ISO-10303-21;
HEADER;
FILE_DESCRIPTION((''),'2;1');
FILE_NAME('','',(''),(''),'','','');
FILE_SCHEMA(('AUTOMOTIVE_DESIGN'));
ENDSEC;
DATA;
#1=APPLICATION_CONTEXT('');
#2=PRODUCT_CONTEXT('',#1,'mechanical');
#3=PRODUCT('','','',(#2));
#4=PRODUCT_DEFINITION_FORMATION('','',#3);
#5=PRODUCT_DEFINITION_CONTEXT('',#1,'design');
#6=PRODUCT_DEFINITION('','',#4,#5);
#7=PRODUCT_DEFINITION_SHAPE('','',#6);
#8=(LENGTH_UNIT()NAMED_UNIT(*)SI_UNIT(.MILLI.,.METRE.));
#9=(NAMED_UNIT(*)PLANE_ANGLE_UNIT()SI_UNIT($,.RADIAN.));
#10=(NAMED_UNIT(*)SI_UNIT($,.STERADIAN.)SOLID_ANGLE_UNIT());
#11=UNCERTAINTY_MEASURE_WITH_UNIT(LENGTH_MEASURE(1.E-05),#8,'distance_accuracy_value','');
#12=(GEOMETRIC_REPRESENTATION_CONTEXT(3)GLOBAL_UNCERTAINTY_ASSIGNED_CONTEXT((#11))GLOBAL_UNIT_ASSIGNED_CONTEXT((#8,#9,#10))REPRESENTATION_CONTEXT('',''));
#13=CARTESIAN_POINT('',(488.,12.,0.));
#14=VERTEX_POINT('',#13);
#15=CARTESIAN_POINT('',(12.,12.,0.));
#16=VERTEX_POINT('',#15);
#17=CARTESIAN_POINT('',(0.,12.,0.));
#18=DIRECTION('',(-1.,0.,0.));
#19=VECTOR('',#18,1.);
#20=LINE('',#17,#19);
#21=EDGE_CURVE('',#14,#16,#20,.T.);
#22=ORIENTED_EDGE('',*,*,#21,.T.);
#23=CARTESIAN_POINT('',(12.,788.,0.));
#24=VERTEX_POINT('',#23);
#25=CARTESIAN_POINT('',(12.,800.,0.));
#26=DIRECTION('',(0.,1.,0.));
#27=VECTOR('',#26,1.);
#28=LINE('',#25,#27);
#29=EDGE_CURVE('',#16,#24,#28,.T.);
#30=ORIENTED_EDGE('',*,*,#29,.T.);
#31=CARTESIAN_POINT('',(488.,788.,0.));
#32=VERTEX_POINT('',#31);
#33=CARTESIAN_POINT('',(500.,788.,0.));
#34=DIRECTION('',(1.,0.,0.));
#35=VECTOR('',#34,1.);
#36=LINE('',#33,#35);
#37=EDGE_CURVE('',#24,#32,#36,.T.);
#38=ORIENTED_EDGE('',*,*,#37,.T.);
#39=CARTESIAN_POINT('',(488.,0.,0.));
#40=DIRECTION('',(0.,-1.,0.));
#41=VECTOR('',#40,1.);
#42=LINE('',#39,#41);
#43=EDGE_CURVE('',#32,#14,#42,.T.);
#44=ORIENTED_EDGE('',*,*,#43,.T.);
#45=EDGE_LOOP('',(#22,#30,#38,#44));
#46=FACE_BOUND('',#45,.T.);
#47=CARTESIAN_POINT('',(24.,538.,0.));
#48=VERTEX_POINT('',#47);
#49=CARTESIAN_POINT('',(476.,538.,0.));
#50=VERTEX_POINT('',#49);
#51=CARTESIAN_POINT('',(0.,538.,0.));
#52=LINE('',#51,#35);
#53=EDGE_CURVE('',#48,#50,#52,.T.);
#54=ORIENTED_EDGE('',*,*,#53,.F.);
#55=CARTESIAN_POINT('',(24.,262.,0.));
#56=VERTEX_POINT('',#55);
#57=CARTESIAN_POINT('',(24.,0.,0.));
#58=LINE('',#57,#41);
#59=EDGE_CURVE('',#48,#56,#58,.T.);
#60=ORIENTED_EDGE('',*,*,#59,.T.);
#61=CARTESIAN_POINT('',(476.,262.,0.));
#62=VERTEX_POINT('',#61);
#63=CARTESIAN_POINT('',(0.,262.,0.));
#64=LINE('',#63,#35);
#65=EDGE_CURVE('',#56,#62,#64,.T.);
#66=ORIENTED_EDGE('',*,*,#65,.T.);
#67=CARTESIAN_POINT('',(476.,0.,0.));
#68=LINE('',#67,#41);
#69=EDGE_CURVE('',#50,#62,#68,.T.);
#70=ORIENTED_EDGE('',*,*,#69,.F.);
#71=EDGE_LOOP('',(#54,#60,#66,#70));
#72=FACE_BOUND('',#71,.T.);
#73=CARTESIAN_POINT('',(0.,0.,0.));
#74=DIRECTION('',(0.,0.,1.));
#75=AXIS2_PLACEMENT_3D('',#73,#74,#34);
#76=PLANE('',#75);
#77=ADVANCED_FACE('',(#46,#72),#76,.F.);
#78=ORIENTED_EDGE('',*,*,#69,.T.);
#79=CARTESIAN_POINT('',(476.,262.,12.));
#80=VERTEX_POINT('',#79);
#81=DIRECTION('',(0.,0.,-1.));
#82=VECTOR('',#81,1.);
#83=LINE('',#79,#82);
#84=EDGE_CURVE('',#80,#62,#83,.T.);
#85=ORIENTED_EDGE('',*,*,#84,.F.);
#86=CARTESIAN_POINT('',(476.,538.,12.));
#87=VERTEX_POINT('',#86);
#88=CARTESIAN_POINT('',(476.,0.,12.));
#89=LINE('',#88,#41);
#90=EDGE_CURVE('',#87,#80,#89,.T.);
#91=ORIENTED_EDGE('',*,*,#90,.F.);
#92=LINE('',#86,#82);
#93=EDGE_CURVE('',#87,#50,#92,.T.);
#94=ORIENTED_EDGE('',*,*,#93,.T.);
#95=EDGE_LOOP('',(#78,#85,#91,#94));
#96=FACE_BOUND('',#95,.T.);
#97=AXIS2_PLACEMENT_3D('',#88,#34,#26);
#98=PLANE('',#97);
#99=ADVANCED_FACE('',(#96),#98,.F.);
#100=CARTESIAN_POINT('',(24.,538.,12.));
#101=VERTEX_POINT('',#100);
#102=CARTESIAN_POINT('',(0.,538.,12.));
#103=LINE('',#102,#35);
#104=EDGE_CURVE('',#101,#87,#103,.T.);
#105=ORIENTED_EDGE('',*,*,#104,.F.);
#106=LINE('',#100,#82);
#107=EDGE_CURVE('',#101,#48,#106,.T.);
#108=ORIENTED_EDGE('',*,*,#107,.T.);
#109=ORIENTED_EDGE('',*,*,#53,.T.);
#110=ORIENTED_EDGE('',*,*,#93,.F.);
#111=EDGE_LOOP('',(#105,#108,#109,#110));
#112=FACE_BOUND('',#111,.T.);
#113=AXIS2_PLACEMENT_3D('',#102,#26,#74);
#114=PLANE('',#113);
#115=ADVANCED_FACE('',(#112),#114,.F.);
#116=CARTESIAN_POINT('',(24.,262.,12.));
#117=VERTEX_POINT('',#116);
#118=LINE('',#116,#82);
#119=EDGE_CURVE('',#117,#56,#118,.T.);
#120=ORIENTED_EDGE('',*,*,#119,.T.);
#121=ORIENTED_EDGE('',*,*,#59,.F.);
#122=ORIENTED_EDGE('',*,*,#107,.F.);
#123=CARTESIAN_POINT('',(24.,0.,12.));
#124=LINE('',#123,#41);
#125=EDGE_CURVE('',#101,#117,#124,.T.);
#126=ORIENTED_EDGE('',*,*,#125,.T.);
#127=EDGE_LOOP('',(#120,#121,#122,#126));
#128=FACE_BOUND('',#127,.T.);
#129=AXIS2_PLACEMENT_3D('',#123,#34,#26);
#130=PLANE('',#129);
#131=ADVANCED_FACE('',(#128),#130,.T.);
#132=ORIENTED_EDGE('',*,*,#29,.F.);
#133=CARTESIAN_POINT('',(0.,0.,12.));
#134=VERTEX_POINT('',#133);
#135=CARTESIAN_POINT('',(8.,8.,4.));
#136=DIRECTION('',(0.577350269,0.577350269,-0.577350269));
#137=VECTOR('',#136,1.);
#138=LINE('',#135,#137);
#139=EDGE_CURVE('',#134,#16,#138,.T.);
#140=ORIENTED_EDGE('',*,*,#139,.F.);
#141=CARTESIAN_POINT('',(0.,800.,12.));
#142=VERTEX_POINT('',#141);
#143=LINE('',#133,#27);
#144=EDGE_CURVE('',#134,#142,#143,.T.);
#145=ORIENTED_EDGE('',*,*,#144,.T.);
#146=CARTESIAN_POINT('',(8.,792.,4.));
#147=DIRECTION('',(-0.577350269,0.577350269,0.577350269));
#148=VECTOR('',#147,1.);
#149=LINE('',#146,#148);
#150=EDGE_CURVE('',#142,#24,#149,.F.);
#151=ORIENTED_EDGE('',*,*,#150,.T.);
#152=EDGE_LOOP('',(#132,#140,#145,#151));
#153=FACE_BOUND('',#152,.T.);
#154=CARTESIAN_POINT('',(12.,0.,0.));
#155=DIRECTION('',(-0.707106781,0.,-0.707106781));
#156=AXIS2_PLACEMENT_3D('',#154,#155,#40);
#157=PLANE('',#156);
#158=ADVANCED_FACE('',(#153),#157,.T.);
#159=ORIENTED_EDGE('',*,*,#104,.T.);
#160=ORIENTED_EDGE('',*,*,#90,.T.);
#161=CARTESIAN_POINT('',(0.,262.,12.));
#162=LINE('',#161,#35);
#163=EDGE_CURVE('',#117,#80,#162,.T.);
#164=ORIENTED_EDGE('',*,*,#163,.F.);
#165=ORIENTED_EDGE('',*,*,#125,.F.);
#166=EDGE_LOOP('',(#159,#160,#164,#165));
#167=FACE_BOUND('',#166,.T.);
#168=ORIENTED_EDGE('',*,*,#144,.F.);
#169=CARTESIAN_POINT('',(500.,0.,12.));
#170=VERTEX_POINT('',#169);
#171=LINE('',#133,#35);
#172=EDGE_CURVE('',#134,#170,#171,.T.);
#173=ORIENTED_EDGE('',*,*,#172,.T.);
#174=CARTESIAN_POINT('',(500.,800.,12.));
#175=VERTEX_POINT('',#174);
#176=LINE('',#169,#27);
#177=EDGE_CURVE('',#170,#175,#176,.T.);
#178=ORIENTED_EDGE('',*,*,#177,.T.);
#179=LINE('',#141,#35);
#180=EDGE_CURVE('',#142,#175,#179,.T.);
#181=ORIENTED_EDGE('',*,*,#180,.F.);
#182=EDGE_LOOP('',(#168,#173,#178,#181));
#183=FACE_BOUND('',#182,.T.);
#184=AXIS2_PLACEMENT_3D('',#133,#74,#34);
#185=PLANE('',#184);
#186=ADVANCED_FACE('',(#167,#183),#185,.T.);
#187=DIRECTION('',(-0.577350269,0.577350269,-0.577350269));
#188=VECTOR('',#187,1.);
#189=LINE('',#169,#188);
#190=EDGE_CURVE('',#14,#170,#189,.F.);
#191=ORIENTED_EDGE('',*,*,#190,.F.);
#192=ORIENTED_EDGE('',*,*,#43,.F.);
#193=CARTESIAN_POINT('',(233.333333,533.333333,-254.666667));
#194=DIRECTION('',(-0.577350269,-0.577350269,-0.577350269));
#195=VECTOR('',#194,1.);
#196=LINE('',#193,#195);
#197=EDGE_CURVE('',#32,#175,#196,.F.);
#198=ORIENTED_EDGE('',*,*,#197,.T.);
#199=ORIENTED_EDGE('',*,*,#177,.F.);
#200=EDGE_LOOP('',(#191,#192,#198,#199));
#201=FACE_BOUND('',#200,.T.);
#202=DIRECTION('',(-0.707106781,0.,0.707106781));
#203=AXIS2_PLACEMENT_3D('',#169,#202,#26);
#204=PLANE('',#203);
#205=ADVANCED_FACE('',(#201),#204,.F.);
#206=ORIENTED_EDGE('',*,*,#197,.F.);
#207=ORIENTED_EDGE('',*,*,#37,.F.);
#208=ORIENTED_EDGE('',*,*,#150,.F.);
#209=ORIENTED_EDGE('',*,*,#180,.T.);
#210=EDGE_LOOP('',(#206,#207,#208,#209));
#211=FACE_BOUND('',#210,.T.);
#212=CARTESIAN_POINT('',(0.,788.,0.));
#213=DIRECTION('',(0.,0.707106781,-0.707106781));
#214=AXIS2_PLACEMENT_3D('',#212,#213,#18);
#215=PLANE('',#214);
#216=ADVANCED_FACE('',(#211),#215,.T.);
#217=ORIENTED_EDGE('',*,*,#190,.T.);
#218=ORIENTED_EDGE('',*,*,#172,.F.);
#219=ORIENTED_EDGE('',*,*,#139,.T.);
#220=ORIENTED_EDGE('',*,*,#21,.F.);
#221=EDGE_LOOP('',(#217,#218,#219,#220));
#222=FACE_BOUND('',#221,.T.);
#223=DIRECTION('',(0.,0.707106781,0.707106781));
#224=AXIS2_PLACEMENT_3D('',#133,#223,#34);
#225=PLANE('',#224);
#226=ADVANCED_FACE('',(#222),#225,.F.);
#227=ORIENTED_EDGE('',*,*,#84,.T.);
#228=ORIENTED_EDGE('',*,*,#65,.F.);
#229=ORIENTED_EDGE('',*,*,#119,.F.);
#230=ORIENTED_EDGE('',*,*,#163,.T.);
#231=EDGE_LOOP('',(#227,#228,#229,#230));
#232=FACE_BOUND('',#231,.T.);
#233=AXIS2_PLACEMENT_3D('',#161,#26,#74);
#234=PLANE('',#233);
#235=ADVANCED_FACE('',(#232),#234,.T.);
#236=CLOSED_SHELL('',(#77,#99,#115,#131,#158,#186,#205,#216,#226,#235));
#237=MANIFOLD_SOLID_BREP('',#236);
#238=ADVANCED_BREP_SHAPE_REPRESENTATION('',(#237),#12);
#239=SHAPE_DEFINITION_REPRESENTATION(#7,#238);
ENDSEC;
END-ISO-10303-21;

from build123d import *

# Parameters (mm, degrees)
SKETCH1_W           = 500
SKETCH1_H           = 800
BOSS_EXTRUDE1_DEPTH = 12
SKETCH1_5_W         = 452
SKETCH1_5_H         = 276
CUT_EXTRUDE1_DEPTH  = 944.474429966
CHAMFER1_SIZE       = 12


with BuildPart() as part:
    # Sketch1 → Boss-Extrude1 (new body)
    with BuildSketch(Plane.XY):
        with Locations((250, 400)):
            Rectangle(SKETCH1_W, SKETCH1_H)
    extrude(amount=BOSS_EXTRUDE1_DEPTH)

    # Sketch1<5> → Cut-Extrude1 (cut, through all)
    with BuildSketch(Plane.XY):
        with Locations((250, 400)):
            Rectangle(SKETCH1_5_W, SKETCH1_5_H)
    extrude(amount=CUT_EXTRUDE1_DEPTH, mode=Mode.SUBTRACT)

    # Chamfer1
    chamfer1_edges = [part.edges().sort_by_distance(p)[0] for p in [
        (250, 0, 0),
        (0, 400, 0),
        (250, 800, 0),
        (500, 400, 0),
    ]]
    chamfer(chamfer1_edges, length=CHAMFER1_SIZE - 0.0001)  # a hair under: the kernel refuses the full size


solid = part.part
